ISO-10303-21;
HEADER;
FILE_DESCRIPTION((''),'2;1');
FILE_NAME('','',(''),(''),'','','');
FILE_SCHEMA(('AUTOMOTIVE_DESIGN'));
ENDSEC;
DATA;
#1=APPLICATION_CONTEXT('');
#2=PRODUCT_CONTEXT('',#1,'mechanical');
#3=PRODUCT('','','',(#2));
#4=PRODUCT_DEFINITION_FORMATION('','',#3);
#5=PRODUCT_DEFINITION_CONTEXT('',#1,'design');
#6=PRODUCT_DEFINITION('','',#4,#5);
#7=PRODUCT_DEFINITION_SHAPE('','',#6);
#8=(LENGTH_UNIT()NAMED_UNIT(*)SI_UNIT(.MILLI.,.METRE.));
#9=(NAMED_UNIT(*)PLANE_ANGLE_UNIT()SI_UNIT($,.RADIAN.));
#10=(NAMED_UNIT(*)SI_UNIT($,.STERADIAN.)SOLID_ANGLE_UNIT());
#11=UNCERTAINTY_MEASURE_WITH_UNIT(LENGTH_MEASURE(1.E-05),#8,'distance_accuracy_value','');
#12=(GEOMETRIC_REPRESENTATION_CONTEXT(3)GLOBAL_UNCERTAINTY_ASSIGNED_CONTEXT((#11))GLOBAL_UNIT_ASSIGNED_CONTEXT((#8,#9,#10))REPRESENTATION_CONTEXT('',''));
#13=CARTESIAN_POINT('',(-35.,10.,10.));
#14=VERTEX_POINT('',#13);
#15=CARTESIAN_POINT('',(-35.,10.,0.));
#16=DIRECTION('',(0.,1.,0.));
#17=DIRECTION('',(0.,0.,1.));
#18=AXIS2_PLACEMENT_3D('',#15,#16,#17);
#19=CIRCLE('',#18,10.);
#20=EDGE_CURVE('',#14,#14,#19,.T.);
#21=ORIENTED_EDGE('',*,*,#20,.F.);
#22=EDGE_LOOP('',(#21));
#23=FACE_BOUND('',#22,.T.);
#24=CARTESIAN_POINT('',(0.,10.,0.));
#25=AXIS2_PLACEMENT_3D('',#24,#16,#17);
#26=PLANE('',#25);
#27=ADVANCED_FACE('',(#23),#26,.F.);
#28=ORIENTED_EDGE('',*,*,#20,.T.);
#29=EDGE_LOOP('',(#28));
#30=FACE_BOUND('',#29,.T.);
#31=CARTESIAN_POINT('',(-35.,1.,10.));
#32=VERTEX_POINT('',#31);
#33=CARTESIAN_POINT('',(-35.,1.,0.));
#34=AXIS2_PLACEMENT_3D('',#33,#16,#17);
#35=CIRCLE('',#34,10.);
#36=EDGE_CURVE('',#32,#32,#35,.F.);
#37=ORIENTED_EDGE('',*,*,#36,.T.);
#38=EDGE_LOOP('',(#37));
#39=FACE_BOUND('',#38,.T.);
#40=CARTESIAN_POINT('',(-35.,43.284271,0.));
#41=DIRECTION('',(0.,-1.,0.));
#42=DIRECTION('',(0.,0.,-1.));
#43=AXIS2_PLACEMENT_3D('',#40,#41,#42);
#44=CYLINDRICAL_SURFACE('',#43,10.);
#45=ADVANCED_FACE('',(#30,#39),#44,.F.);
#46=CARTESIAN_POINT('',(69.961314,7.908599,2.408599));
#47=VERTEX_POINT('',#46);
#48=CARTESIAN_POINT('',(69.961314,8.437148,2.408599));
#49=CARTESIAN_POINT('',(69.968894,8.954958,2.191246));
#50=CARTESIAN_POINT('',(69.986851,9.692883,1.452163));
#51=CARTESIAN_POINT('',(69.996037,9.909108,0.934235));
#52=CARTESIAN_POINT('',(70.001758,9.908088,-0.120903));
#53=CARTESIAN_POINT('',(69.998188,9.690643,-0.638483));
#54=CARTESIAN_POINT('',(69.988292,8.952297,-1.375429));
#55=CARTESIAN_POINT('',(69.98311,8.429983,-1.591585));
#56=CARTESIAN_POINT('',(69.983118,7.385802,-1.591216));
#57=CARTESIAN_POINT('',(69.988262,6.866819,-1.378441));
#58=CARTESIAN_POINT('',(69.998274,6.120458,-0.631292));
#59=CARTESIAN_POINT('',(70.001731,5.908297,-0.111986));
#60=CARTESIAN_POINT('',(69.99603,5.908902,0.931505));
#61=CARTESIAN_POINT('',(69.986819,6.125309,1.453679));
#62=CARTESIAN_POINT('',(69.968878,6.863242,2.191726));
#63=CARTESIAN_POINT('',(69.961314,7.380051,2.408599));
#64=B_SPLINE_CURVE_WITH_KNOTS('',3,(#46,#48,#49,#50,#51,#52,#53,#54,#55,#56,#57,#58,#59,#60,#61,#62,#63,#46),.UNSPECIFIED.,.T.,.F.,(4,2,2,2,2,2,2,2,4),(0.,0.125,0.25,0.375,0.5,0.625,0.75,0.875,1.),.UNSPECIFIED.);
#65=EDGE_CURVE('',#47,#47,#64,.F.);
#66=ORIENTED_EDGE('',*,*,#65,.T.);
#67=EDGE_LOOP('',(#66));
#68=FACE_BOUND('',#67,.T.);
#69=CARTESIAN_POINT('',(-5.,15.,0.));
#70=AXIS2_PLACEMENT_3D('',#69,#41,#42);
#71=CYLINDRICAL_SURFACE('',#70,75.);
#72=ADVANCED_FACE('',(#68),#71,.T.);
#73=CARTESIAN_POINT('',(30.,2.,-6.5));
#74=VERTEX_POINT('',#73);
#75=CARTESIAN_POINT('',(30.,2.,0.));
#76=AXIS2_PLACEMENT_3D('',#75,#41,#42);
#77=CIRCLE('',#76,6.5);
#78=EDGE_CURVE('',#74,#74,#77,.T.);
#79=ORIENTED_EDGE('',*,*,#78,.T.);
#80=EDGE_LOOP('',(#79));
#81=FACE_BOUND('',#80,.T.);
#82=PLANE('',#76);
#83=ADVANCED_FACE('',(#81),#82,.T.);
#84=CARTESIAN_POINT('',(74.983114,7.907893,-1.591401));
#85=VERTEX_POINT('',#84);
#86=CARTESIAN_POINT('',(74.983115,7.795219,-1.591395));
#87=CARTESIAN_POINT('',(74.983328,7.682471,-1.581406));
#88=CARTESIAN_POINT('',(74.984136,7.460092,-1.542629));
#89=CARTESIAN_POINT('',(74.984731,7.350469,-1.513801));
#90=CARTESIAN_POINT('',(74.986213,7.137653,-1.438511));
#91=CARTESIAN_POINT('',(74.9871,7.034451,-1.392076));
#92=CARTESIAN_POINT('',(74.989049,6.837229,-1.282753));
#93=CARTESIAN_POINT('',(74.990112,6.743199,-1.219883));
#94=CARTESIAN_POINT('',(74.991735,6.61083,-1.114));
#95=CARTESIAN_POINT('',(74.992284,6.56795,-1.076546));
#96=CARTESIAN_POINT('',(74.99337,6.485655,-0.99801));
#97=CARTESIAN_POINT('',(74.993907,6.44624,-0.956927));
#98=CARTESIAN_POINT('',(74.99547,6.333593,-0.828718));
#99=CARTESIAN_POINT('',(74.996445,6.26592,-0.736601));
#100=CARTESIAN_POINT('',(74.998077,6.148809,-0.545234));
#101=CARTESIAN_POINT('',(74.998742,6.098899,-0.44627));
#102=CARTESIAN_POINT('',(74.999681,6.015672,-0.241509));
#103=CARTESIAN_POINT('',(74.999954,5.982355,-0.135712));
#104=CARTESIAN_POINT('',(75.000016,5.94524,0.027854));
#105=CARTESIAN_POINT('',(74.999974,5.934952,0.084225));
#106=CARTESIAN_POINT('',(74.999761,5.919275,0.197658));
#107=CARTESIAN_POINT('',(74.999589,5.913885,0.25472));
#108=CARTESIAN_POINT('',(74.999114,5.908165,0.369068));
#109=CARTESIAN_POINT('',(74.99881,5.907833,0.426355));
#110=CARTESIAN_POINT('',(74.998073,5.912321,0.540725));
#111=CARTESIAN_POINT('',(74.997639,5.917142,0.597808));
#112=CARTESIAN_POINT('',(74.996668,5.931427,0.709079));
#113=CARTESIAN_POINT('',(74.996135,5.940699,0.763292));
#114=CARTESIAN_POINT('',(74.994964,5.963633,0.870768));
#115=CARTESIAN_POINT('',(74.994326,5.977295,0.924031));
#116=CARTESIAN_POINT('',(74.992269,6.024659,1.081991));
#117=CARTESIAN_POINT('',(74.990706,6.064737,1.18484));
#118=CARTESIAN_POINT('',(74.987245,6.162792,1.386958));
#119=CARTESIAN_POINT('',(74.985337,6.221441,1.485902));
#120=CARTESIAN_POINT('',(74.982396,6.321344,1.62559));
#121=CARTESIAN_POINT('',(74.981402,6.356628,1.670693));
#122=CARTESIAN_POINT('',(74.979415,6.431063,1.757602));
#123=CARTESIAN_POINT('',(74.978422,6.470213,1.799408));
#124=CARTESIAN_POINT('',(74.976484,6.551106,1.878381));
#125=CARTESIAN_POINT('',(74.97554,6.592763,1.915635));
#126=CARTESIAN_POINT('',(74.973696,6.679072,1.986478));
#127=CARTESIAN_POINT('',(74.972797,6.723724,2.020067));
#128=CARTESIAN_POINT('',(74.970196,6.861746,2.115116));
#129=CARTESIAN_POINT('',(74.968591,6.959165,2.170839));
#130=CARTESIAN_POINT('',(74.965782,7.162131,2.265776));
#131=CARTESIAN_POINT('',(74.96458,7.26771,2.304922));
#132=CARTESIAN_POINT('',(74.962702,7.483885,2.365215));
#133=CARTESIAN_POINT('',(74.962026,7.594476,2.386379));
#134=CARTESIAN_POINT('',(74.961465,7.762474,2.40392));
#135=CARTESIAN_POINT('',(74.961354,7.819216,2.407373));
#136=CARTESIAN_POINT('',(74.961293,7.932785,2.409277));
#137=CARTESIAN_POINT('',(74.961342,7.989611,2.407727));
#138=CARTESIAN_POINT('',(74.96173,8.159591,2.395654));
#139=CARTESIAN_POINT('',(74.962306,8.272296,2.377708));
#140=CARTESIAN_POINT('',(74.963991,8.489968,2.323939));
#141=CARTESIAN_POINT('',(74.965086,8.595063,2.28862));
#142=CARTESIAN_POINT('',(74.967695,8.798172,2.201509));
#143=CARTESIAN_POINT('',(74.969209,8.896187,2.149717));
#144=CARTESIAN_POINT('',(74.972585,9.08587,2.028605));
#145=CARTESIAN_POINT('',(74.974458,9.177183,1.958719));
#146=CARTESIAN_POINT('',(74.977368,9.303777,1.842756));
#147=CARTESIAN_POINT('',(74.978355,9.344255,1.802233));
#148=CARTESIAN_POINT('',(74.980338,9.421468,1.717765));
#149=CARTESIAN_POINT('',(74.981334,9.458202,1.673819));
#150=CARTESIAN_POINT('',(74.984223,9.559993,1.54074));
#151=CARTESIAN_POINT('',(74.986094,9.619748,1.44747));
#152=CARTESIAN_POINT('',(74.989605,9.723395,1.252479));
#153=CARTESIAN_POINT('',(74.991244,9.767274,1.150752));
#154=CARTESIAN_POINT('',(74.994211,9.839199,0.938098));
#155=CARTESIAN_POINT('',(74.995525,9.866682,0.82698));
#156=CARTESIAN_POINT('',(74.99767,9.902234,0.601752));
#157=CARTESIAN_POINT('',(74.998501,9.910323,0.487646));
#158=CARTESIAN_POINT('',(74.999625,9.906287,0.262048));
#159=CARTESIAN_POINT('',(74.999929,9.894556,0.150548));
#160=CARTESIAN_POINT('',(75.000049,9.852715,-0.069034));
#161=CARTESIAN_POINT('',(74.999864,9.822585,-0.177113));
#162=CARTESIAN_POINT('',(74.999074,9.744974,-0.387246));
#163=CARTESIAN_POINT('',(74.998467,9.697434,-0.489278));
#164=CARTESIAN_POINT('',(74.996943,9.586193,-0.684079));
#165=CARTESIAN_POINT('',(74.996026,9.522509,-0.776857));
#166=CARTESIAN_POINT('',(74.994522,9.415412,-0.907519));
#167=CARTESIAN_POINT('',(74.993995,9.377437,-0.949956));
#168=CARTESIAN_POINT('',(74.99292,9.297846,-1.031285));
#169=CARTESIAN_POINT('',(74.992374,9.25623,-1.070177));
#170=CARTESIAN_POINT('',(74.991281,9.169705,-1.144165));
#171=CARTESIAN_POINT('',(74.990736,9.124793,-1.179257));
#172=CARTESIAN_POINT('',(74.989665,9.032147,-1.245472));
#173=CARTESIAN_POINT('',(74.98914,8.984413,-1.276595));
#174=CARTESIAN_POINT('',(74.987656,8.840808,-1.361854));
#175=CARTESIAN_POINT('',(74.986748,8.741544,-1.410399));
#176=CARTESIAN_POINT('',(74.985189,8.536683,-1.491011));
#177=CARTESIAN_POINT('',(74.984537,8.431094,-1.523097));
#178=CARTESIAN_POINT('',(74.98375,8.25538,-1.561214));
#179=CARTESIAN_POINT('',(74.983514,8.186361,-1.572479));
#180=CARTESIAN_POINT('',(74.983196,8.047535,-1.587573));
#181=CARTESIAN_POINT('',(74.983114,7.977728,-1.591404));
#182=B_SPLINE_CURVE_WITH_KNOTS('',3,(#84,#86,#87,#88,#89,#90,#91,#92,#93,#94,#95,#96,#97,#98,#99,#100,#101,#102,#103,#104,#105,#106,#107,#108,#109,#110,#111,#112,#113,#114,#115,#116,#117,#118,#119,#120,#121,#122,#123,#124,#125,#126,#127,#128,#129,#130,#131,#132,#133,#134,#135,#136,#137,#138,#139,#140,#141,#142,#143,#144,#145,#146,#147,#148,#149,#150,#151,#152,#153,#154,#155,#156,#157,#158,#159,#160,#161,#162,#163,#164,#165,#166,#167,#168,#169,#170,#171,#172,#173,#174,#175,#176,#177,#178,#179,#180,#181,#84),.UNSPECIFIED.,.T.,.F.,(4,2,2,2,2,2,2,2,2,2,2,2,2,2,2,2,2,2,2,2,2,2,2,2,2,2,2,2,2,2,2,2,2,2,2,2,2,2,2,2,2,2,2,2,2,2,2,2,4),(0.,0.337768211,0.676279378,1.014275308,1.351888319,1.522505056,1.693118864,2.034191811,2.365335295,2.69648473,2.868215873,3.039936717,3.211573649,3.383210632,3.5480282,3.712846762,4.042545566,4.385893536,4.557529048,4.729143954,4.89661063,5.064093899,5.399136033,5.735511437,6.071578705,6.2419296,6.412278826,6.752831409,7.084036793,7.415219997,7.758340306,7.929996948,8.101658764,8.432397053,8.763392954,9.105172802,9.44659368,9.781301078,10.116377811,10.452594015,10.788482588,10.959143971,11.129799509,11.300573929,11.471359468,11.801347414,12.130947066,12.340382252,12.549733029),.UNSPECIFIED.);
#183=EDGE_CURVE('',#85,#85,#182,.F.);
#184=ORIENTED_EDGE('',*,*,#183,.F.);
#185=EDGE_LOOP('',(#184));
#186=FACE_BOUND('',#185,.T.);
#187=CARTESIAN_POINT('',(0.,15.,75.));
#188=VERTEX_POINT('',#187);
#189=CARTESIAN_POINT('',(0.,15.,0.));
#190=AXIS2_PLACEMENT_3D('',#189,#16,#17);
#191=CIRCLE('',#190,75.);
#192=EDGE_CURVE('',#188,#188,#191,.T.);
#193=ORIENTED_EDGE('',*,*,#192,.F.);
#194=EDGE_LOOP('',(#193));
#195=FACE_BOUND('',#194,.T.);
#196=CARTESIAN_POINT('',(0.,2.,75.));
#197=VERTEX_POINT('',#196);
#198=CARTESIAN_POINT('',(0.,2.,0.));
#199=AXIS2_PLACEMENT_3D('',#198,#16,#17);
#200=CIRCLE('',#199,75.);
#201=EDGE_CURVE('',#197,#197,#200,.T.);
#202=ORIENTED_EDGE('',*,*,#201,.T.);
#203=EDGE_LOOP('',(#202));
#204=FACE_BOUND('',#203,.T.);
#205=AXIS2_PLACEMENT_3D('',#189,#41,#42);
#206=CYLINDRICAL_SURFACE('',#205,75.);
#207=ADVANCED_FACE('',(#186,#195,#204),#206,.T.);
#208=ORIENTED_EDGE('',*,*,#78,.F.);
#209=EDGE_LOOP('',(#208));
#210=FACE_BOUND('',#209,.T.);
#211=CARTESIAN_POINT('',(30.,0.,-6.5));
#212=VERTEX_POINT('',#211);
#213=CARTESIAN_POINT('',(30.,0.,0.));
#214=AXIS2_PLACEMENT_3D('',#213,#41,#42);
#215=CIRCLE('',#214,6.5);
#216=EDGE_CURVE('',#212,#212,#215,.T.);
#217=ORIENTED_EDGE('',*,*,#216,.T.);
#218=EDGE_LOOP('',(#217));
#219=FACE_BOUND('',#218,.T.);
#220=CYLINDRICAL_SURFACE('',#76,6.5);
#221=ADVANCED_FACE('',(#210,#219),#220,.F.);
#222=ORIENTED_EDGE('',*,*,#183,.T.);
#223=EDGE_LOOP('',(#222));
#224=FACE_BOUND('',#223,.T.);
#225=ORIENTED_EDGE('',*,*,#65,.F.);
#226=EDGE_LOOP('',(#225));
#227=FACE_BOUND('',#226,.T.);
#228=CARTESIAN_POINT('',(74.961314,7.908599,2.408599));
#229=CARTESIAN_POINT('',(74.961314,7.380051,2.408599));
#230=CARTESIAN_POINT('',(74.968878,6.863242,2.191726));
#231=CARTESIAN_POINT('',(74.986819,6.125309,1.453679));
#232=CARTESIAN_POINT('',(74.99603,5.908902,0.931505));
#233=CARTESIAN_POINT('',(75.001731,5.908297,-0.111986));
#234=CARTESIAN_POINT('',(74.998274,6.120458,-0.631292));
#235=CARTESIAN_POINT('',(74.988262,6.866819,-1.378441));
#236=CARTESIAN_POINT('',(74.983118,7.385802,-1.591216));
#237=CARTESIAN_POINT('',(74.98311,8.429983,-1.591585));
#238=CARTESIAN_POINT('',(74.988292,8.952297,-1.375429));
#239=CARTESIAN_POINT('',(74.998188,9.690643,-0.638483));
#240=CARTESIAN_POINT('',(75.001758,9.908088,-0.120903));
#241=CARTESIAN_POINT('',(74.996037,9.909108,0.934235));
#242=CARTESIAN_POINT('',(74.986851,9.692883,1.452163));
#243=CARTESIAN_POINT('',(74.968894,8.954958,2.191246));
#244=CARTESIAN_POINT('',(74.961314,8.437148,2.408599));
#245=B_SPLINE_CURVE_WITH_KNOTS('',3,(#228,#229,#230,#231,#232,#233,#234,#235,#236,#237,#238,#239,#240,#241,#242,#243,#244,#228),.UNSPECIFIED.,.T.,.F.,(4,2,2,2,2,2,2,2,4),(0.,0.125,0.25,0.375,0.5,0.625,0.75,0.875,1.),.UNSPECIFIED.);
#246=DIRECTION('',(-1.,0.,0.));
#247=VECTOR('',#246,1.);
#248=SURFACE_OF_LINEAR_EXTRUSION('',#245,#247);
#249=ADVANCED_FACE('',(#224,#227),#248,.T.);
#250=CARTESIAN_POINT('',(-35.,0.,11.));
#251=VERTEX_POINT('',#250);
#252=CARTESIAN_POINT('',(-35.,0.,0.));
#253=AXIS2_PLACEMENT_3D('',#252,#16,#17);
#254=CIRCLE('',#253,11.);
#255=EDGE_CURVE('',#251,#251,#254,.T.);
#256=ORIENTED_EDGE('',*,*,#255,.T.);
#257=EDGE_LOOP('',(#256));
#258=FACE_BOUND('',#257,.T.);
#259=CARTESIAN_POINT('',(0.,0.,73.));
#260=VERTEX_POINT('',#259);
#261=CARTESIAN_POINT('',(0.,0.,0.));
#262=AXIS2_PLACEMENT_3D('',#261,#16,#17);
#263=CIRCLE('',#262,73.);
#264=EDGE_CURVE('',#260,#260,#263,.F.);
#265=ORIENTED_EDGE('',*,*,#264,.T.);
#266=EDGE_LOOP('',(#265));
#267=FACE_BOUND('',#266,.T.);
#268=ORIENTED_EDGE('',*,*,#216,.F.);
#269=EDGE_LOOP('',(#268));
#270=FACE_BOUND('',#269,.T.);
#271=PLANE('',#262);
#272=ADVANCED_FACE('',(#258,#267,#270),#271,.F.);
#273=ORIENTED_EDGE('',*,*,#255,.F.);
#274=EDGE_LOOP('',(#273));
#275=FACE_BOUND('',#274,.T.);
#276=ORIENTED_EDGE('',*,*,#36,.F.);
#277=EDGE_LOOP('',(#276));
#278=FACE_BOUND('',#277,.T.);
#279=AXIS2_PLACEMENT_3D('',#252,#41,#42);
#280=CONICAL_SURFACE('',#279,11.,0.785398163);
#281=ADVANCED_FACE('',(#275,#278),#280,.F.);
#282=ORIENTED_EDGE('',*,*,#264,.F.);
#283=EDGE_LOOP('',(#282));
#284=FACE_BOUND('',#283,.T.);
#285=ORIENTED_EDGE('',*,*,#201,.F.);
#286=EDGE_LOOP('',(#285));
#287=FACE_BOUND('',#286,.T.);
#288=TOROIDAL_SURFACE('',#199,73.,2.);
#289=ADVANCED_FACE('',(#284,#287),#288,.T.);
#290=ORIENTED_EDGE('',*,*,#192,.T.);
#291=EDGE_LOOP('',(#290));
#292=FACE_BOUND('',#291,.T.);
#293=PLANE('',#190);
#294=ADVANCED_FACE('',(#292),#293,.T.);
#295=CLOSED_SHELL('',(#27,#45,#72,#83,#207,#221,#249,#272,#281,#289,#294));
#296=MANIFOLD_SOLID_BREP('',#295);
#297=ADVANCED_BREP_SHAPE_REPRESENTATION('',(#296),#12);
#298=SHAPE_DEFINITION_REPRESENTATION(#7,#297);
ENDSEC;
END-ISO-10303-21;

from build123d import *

# Parameters (mm, degrees)
SKETCH_1_R            = 75
EXTRUDE_1_DEPTH       = 15
SKETCH_2_R            = 10
CUT_EXTRUDE_2_DEPTH   = 10
FILLET_1_R            = 2
CHAMFER_1_SIZE        = 1
SKETCH_3_R            = 6.5
CUT_EXTRUDE_3_DEPTH   = 2
CUT_EXTRUDE_START     = 69.96131425
CUT_EXTRUDE_9_DEPTH   = 6.03868575
CUT_EXTRUDE_START_2   = 5
CUT_EXTRUDE_9_2_DEPTH = 6


with BuildPart() as part:
    # 草图1 → 凸台-拉伸1 (new body)
    with BuildSketch(Plane(origin=(0, 0, 0), x_dir=(1, 0, 0), z_dir=(0, 1, 0))):
        with Locations(Location((0, 0, 0), (0, 0, 270))):
            Circle(SKETCH_1_R)
    extrude(amount=EXTRUDE_1_DEPTH)

    # 草图2 → 切除-拉伸2 (cut)
    with BuildSketch(Plane(origin=(0, 0, 0), x_dir=(1, 0, 0), z_dir=(0, 1, 0))):
        with Locations(Location((-35, 0, 0), (0, 0, 270))):
            Circle(SKETCH_2_R)
    extrude(amount=CUT_EXTRUDE_2_DEPTH, mode=Mode.SUBTRACT)

    # 圆角1
    fillet_1_edges = [part.edges().sort_by_distance(p)[0] for p in [
        (0, 0, -75),
    ]]
    fillet(fillet_1_edges, radius=FILLET_1_R)

    # 倒角1
    chamfer_1_edges = [part.edges().sort_by_distance(p)[0] for p in [
        (-35, 0, -10),
    ]]
    chamfer(chamfer_1_edges, length=CHAMFER_1_SIZE)

    # 草图3 → 切除-拉伸3 (cut)
    with BuildSketch(Plane.XZ):
        with Locations(Location((30, 0, 0), (0, 0, 270))):
            Circle(SKETCH_3_R)
    extrude(amount=-CUT_EXTRUDE_3_DEPTH, mode=Mode.SUBTRACT)

    # 切除-拉伸9: read off the stored shape, not the designer's step
    # 切除-拉伸9 outline → 切除-拉伸9 (cut)
    with BuildSketch(Plane(origin=(0, 0, 0), x_dir=(0, 0, -1), z_dir=(1, 0, 0)).offset(CUT_EXTRUDE_START)):
        with BuildLine():
            add(Edge.make_bspline(
                [(-2.408599358, 7.908599358), (-2.408599358, 7.380050553), (-2.19172637, 6.863241712), (-1.453678928, 6.125309354), (-0.931504849, 5.908902276), (0.111986372, 5.908297113), (0.631291702, 6.120458395), (1.378441313, 6.866818593), (1.591215997, 7.385801707), (1.591585037, 8.429983307), (1.375428682, 8.952297025), (0.638483078, 9.690642916), (0.120902782, 9.908088408), (-0.93423459, 9.909108439), (-1.452163157, 9.692883252), (-2.191245952, 8.954957584), (-2.408599358, 8.437148163), (-2.408599358, 7.908599358)],
                knots=[0, 0, 0, 0, 0.125, 0.125, 0.25, 0.25, 0.375, 0.375, 0.5, 0.5, 0.625, 0.625, 0.75, 0.75, 0.875, 0.875, 1, 1, 1, 1], degree=3))
        make_face()
    extrude(amount=CUT_EXTRUDE_9_DEPTH, mode=Mode.SUBTRACT)

    # Cut-Extrude 9 2 outline → Cut-Extrude 9 2 (add)
    with BuildSketch(Plane(origin=(0, 0, 0), x_dir=(1, 0, 0), z_dir=(0, 1, 0)).offset(CUT_EXTRUDE_START_2)):
        with BuildLine():
            ThreePointArc((69.96131435, -2.408599358), (69.998905417, -0.405199028), (69.982963585, 1.598490525))
            Line((69.982963585, 1.598490525), (69.96131425, 2.614030645))
            Line((69.96131425, 2.614030645), (69.96131435, -2.408599358))
        make_face()
    extrude(amount=CUT_EXTRUDE_9_2_DEPTH)


solid = part.part
